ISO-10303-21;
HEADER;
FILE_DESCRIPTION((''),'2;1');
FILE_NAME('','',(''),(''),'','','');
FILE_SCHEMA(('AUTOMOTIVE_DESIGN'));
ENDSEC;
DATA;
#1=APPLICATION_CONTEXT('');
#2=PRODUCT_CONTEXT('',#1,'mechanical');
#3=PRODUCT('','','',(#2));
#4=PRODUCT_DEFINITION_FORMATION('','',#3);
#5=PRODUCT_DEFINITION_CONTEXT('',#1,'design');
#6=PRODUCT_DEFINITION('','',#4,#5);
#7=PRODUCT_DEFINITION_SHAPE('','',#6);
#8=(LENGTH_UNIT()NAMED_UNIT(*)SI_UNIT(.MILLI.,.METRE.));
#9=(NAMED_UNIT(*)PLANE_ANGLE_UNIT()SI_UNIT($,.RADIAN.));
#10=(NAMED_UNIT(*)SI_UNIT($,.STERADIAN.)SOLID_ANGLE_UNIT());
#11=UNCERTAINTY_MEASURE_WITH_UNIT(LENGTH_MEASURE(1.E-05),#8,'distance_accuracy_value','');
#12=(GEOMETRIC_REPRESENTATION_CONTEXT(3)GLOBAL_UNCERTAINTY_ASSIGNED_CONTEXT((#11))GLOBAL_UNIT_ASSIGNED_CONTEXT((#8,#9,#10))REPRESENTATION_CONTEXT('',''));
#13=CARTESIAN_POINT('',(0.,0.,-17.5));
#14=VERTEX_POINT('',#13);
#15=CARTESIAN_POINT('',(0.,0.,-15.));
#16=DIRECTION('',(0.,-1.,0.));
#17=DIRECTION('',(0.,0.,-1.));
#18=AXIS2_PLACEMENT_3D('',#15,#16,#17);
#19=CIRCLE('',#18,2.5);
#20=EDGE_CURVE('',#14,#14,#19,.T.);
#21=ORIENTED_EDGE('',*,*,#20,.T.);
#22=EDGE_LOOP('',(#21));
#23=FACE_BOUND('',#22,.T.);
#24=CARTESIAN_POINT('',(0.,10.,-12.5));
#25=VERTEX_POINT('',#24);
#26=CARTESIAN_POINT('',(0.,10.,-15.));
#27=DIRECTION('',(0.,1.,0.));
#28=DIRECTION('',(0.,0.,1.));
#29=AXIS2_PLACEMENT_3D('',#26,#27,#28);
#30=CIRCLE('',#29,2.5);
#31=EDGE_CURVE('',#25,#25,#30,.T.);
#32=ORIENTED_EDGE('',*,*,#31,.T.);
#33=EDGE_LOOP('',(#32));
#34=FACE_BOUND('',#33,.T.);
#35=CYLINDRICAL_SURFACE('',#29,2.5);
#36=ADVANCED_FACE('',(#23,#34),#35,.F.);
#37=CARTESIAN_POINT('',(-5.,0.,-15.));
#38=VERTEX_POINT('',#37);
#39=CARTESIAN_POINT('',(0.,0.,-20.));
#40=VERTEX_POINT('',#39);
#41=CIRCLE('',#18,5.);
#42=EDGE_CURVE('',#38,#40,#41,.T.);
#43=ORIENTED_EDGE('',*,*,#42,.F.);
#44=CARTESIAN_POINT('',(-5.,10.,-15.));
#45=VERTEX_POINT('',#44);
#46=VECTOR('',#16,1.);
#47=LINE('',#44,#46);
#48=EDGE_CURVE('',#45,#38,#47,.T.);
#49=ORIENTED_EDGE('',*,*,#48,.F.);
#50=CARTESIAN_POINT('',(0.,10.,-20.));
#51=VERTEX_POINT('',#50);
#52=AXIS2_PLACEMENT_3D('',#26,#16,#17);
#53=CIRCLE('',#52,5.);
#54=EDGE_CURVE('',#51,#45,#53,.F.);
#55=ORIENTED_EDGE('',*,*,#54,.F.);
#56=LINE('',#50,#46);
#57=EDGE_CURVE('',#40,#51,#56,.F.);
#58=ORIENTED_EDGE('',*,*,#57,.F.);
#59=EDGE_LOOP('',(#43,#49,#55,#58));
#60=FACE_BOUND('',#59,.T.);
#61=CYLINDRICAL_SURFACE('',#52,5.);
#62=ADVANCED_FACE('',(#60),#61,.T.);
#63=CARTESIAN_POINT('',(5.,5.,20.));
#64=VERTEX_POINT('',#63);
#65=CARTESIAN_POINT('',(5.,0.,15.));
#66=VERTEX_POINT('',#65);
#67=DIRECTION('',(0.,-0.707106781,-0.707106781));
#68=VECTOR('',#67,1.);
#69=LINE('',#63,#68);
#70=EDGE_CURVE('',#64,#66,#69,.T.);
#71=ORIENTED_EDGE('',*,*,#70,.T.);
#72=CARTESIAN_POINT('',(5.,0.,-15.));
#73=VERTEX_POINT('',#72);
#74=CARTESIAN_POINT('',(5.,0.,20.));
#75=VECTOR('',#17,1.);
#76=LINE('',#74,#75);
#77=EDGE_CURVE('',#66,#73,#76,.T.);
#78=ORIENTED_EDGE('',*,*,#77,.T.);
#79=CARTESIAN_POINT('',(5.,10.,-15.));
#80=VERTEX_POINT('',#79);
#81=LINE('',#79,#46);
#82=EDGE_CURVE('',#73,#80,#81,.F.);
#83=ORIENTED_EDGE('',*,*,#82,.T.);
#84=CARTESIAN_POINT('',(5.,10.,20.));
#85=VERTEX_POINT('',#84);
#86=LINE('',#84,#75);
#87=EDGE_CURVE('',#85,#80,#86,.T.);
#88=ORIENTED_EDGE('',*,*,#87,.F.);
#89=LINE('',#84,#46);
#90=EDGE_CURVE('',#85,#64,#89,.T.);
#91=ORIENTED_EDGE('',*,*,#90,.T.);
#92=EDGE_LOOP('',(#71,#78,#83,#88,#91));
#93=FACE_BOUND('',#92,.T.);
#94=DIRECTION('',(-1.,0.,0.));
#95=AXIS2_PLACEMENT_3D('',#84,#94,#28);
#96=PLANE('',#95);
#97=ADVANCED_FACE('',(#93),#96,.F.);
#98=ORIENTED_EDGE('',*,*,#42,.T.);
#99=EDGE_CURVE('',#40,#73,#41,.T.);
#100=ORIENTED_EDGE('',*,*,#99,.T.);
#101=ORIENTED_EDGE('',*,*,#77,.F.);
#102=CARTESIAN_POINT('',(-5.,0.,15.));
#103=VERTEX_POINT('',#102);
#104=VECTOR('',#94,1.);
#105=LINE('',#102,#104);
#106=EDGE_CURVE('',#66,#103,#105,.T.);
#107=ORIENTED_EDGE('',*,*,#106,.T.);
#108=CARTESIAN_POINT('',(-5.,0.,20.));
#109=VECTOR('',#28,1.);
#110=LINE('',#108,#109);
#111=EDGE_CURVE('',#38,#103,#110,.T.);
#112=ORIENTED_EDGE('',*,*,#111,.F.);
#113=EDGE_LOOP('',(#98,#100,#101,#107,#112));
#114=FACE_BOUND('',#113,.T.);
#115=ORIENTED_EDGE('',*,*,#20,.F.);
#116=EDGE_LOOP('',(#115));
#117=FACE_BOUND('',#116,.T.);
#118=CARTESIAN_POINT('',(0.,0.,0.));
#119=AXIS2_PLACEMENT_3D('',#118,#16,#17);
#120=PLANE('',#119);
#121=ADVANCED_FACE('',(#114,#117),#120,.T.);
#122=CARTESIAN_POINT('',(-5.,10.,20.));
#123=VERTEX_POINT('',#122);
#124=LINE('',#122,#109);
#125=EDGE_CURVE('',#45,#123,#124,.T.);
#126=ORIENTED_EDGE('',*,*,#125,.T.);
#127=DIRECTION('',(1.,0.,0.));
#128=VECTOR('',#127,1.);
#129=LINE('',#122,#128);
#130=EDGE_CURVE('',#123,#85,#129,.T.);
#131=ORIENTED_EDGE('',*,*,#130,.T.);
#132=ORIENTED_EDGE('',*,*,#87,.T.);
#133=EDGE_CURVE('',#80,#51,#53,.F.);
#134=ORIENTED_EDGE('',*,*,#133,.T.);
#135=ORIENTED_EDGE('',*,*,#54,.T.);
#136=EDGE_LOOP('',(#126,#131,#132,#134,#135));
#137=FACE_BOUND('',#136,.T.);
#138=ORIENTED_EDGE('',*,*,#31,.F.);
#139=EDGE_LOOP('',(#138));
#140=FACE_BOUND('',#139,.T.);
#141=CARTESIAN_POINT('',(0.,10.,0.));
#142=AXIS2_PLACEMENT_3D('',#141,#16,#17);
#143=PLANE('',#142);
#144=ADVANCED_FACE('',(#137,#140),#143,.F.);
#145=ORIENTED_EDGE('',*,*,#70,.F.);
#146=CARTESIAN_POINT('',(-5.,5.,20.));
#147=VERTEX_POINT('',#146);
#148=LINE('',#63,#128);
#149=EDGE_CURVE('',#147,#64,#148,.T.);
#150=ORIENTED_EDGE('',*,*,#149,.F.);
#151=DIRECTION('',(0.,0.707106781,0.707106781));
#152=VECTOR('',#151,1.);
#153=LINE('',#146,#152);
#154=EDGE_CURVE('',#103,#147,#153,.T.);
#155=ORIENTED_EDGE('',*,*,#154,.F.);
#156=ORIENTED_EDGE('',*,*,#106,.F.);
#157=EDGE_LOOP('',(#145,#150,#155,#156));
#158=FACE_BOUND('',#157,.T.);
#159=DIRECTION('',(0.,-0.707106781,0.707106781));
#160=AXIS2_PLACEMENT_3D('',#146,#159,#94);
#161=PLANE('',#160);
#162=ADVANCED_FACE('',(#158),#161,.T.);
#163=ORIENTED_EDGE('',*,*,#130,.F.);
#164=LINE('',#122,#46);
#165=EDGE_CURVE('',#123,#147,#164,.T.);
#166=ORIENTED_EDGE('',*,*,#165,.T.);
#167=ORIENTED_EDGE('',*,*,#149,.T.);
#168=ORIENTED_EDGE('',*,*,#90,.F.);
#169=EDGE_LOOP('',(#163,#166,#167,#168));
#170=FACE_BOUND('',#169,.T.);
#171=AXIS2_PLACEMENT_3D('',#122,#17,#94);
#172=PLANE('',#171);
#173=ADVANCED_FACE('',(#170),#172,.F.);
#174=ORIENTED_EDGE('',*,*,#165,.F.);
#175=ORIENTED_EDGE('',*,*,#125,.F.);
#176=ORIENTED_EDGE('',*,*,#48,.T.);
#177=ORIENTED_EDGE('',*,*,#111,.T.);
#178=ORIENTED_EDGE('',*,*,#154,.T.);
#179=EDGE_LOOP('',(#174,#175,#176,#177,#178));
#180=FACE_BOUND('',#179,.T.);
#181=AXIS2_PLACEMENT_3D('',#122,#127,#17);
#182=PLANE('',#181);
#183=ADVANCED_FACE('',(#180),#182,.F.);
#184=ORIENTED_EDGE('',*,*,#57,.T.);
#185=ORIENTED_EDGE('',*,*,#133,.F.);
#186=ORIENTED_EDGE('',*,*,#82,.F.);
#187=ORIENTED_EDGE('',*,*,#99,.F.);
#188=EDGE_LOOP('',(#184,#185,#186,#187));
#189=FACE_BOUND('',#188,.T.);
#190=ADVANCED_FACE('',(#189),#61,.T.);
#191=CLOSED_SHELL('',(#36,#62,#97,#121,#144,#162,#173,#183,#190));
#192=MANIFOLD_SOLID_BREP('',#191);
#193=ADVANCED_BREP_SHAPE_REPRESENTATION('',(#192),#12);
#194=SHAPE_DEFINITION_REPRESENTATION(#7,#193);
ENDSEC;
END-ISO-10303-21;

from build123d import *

# Parameters (mm, degrees)
SKETCH1_W             = 10
SKETCH1_H             = 40
BOSS_EXTRUDE1_DEPTH   = 10
F_5_0MM_DOWEL_HOLE1_D = 5
FILLET1_R             = 5
CHAMFER1_SIZE         = 5


with BuildPart() as part:
    # Sketch1 → Boss-Extrude1 (new body)
    with BuildSketch(Plane(origin=(0, 0, 0), x_dir=(1, 0, 0), z_dir=(0, 1, 0))):
        Rectangle(SKETCH1_W, SKETCH1_H)
    extrude(amount=BOSS_EXTRUDE1_DEPTH)

    # Ø5.0mm Dowel Hole1 (through all)
    with Locations(Plane(origin=(0, 10, 0), x_dir=(1, 0, 0), z_dir=(0, 1, 0))):
        with Locations((0, 15)):
            Hole(F_5_0MM_DOWEL_HOLE1_D / 2)

    # Fillet1
    fillet1_edges = [part.edges().sort_by_distance(p)[0] for p in [
        (5, 5, -20),
        (-5, 5, -20),
    ]]
    fillet(fillet1_edges, radius=FILLET1_R - 0.0001)  # a hair under: the kernel refuses the full size

    # Chamfer1
    chamfer1_edges = [part.edges().sort_by_distance(p)[0] for p in [
        (0, 0, 20),
    ]]
    chamfer(chamfer1_edges, length=CHAMFER1_SIZE)


solid = part.part
